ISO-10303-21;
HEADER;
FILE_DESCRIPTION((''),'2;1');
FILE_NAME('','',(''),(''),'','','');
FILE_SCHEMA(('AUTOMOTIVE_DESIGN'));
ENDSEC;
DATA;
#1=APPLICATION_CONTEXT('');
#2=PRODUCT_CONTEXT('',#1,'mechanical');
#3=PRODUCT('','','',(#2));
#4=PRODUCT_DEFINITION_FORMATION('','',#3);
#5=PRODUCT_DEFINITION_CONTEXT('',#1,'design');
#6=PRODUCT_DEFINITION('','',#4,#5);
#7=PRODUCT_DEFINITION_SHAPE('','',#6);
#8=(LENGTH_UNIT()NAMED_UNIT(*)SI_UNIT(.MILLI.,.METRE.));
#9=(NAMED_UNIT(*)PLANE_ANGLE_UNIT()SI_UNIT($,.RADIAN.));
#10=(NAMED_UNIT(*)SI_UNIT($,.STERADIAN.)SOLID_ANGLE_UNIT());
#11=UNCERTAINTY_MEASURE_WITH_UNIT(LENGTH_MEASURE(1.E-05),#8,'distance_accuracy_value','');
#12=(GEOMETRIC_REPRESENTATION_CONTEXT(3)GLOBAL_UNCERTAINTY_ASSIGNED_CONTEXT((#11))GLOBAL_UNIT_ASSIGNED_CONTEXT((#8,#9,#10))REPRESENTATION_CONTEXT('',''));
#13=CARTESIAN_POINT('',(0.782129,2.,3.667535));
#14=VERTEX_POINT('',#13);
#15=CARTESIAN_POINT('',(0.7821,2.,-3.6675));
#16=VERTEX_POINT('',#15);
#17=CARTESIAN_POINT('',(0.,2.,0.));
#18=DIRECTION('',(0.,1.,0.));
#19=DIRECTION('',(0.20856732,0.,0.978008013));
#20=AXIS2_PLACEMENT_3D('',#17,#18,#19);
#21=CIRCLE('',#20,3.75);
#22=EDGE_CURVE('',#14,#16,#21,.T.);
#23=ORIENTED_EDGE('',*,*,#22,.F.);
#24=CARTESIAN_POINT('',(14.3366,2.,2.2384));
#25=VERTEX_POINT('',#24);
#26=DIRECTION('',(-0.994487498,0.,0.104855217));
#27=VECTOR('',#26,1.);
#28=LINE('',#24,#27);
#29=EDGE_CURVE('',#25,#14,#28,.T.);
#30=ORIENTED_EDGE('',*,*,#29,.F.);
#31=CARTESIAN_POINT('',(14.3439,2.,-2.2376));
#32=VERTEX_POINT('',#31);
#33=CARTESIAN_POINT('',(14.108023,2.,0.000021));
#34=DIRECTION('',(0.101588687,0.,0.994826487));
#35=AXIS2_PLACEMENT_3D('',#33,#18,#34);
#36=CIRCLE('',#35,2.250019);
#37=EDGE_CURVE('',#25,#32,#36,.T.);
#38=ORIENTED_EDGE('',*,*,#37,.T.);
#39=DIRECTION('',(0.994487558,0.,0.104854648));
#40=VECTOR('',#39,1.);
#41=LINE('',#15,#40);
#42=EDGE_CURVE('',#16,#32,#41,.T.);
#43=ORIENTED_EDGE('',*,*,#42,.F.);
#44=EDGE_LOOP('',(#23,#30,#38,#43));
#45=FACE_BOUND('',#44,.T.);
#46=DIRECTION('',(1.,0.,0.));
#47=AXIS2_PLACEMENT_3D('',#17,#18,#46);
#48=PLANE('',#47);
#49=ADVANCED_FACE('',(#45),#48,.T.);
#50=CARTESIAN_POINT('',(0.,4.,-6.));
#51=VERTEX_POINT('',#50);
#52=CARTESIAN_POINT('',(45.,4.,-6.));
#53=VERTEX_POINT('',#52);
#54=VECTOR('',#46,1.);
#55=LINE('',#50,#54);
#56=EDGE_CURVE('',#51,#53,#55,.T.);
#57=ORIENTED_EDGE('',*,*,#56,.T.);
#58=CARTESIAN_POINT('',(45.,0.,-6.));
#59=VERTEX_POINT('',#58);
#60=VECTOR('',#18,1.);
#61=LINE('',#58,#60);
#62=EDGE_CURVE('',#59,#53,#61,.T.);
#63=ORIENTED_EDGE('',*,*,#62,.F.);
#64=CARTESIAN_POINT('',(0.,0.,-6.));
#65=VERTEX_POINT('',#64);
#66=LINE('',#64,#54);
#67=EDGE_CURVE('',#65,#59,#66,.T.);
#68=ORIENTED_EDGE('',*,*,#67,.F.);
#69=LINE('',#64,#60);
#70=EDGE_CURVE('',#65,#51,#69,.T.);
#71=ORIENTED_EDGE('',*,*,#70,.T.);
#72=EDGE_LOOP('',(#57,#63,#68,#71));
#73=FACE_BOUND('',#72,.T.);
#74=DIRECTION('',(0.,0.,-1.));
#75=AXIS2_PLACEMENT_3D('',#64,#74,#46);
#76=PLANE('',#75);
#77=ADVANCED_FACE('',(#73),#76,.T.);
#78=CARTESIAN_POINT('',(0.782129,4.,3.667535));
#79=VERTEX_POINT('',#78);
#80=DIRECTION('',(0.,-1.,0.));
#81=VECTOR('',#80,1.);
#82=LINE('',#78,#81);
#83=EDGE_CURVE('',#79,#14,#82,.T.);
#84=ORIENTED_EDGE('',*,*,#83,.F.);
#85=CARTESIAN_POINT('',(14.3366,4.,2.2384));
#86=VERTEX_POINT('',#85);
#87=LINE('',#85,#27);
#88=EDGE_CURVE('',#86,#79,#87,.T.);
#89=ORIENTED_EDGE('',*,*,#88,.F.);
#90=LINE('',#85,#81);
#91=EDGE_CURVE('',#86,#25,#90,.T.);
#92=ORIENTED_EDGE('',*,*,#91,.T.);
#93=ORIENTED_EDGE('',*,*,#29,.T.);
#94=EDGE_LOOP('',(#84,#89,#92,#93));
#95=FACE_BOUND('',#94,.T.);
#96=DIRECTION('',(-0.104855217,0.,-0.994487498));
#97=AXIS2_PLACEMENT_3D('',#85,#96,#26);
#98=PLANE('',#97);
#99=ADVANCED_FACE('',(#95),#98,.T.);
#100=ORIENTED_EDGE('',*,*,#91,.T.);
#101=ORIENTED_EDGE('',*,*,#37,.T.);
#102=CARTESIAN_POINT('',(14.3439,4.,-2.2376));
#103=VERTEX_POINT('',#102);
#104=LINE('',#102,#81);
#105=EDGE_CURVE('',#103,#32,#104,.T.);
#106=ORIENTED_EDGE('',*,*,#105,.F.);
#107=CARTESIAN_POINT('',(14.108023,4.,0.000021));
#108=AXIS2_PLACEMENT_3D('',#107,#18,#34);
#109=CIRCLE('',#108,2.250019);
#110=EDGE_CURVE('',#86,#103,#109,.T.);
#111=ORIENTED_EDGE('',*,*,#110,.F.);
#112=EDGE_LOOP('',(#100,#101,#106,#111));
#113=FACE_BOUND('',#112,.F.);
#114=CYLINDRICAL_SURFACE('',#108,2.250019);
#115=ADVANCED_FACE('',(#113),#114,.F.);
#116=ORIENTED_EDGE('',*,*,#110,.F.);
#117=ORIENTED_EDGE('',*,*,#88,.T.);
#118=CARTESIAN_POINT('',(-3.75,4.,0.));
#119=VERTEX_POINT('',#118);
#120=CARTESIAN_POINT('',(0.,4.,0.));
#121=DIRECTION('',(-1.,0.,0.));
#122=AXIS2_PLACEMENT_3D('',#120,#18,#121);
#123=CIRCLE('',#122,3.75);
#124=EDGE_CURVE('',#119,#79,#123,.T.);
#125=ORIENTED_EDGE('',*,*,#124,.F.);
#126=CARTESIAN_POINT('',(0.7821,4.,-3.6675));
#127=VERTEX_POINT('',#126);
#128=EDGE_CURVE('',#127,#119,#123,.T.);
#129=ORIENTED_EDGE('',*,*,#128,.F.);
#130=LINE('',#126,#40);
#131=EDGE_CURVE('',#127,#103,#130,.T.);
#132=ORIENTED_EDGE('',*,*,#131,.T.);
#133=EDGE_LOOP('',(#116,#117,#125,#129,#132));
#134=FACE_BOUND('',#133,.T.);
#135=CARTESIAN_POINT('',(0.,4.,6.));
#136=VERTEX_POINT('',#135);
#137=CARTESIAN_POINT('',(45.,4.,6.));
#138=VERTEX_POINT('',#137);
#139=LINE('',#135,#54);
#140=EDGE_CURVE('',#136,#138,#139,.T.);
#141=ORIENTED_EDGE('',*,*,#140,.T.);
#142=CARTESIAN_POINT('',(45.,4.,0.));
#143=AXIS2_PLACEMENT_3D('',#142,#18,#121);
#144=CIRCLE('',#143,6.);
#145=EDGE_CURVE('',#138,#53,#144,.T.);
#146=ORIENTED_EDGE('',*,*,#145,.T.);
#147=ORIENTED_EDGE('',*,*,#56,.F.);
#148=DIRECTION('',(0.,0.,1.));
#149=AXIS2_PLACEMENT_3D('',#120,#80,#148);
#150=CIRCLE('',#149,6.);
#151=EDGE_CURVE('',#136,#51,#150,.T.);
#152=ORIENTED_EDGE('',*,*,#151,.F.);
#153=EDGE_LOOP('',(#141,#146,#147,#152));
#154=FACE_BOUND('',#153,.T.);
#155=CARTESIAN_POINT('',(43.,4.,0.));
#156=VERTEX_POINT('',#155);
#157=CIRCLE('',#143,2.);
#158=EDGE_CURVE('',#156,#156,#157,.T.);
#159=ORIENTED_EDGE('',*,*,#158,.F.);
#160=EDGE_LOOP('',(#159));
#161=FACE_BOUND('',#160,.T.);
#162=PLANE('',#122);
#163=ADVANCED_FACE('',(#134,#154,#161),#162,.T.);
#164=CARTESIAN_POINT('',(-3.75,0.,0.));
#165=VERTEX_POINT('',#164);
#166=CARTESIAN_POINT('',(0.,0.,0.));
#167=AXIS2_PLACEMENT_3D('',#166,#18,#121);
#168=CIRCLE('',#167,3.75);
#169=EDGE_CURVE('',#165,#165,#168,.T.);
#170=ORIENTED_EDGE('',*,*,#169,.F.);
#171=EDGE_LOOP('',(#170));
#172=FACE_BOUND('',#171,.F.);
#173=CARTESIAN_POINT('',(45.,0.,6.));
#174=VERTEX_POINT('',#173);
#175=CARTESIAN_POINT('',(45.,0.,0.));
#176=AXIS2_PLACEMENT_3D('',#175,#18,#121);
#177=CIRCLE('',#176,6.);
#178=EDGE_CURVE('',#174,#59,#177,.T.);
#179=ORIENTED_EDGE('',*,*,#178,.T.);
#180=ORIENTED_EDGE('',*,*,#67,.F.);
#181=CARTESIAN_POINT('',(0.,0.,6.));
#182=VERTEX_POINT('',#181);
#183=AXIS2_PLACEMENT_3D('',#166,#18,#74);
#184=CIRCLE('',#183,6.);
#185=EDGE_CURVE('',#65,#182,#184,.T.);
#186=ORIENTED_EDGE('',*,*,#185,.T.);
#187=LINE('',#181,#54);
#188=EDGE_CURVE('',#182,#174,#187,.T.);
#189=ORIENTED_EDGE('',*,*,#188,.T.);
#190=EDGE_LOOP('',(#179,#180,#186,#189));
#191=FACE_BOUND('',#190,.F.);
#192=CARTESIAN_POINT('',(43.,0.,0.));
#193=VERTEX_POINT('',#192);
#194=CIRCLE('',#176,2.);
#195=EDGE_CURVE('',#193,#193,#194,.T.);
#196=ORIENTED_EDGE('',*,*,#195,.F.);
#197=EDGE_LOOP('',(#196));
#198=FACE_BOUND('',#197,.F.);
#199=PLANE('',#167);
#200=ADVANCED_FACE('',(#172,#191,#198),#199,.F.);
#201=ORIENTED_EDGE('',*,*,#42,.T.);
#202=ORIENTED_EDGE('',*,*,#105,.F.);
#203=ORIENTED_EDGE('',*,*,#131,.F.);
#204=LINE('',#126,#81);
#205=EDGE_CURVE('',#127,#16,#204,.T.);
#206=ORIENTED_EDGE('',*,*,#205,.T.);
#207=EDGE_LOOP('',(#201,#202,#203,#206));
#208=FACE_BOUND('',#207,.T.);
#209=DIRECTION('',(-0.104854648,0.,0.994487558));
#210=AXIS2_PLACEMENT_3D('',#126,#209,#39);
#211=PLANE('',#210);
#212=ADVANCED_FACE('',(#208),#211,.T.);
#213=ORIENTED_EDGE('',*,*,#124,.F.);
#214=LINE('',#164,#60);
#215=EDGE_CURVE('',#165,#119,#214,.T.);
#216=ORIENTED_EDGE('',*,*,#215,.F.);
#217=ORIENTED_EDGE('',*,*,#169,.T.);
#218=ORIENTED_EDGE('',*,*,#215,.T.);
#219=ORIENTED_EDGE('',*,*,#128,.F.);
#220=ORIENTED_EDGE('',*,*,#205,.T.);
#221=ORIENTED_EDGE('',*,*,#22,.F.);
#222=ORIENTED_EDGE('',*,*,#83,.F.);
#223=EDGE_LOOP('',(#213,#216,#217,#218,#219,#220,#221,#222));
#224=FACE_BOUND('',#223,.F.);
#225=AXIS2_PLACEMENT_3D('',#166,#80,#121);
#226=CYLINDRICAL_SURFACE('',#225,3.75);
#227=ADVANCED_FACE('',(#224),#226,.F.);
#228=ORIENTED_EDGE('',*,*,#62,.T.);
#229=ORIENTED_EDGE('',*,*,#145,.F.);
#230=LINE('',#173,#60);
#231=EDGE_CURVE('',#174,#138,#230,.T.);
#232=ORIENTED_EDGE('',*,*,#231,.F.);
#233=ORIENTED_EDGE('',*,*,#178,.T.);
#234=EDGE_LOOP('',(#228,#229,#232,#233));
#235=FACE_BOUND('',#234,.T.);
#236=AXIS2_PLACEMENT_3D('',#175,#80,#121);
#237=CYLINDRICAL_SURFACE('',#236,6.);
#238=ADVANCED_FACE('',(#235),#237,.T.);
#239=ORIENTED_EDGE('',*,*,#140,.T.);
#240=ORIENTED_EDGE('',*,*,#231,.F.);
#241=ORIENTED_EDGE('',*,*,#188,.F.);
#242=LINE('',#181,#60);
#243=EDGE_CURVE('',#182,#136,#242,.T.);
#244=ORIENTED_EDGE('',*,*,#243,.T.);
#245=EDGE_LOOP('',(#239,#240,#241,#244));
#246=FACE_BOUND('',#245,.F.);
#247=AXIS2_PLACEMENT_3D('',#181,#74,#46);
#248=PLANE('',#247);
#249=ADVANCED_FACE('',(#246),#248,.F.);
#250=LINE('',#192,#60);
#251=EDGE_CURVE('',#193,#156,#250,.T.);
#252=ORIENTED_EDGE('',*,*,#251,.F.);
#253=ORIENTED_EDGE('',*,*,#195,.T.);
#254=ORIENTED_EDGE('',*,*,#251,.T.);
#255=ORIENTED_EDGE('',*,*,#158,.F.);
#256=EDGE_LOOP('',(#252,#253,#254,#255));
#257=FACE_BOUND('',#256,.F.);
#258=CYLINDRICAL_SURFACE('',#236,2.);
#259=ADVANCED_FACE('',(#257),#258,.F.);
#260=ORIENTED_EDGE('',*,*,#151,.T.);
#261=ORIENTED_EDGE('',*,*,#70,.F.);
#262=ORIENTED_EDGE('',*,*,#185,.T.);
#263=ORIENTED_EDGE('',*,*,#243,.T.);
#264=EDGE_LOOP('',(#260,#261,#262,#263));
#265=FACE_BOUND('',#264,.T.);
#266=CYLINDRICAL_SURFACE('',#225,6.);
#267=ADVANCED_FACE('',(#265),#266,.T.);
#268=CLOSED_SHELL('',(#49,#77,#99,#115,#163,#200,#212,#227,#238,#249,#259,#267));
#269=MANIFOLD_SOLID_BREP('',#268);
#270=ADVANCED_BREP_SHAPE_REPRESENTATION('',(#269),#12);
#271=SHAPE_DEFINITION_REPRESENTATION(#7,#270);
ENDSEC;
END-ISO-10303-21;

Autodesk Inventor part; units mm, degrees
ref_plane "YZ Plane" through (0, 0, 0) normal (1, 0, 0) x (0, 1, 0)
ref_plane "XZ Plane" through (0, 0, 0) normal (0, 1, 0) x (-1, 0, 0)
ref_plane "XY Plane" through (0, 0, 0) normal (0, 0, 1) x (1, 0, 0)
sketch "Sketch1" plane through (0, 0, 0) normal (0, 1, 0) x (-1, 0, 0)
  circle A0 centre (0, 0) radius 3.75
  circle A1 centre (0, 0) radius 6
  circle A2 centre (-45, 0) radius 2
  circle A3 centre (-45, 0) radius 6
  line L0 (0, 6) -> (-45, 6)
  line L1 (0, -6) -> (-45, -6)
  dimension "d0" = 7.5
  dimension "d1" = 12
  dimension "d2" = 4
  dimension "d3" = 45
  dimension "d4" = 12
extrude "Extrusion2" add sketch "Sketch1" along normal blind 4
sketch "Sketch2" plane through (0, 4, 0) normal (0, 1, 0) x (1, 0, 0)
  arc A0 (14.3366, -2.2384) -> (14.3439, 2.2376) centre (14.108, 0) ccw
  circle A1 centre (0, 0) radius 3.75 projected
  arc A2 (0.7821, 3.6675) -> (2.5223, -2.775) centre (0, 0) ccw
  line L0 (0.7821, 3.6675) -> (14.3439, 2.2376)
  line L1 (14.3366, -2.2384) -> (0, -3.75)
  point P0 (2.5223, 2.775)
  dimension "d9" = 14.108
  dimension "d10" = 4.5
  dimension "d11" = 2.775
  dimension "d12" = 2.5223
  dimension "d13" = 5.55
extrude "Extrusion3" cut sketch "Sketch2" against normal blind 2 contours L1 A1 L0 A0
properties part number "Stewart_ServoArm"
